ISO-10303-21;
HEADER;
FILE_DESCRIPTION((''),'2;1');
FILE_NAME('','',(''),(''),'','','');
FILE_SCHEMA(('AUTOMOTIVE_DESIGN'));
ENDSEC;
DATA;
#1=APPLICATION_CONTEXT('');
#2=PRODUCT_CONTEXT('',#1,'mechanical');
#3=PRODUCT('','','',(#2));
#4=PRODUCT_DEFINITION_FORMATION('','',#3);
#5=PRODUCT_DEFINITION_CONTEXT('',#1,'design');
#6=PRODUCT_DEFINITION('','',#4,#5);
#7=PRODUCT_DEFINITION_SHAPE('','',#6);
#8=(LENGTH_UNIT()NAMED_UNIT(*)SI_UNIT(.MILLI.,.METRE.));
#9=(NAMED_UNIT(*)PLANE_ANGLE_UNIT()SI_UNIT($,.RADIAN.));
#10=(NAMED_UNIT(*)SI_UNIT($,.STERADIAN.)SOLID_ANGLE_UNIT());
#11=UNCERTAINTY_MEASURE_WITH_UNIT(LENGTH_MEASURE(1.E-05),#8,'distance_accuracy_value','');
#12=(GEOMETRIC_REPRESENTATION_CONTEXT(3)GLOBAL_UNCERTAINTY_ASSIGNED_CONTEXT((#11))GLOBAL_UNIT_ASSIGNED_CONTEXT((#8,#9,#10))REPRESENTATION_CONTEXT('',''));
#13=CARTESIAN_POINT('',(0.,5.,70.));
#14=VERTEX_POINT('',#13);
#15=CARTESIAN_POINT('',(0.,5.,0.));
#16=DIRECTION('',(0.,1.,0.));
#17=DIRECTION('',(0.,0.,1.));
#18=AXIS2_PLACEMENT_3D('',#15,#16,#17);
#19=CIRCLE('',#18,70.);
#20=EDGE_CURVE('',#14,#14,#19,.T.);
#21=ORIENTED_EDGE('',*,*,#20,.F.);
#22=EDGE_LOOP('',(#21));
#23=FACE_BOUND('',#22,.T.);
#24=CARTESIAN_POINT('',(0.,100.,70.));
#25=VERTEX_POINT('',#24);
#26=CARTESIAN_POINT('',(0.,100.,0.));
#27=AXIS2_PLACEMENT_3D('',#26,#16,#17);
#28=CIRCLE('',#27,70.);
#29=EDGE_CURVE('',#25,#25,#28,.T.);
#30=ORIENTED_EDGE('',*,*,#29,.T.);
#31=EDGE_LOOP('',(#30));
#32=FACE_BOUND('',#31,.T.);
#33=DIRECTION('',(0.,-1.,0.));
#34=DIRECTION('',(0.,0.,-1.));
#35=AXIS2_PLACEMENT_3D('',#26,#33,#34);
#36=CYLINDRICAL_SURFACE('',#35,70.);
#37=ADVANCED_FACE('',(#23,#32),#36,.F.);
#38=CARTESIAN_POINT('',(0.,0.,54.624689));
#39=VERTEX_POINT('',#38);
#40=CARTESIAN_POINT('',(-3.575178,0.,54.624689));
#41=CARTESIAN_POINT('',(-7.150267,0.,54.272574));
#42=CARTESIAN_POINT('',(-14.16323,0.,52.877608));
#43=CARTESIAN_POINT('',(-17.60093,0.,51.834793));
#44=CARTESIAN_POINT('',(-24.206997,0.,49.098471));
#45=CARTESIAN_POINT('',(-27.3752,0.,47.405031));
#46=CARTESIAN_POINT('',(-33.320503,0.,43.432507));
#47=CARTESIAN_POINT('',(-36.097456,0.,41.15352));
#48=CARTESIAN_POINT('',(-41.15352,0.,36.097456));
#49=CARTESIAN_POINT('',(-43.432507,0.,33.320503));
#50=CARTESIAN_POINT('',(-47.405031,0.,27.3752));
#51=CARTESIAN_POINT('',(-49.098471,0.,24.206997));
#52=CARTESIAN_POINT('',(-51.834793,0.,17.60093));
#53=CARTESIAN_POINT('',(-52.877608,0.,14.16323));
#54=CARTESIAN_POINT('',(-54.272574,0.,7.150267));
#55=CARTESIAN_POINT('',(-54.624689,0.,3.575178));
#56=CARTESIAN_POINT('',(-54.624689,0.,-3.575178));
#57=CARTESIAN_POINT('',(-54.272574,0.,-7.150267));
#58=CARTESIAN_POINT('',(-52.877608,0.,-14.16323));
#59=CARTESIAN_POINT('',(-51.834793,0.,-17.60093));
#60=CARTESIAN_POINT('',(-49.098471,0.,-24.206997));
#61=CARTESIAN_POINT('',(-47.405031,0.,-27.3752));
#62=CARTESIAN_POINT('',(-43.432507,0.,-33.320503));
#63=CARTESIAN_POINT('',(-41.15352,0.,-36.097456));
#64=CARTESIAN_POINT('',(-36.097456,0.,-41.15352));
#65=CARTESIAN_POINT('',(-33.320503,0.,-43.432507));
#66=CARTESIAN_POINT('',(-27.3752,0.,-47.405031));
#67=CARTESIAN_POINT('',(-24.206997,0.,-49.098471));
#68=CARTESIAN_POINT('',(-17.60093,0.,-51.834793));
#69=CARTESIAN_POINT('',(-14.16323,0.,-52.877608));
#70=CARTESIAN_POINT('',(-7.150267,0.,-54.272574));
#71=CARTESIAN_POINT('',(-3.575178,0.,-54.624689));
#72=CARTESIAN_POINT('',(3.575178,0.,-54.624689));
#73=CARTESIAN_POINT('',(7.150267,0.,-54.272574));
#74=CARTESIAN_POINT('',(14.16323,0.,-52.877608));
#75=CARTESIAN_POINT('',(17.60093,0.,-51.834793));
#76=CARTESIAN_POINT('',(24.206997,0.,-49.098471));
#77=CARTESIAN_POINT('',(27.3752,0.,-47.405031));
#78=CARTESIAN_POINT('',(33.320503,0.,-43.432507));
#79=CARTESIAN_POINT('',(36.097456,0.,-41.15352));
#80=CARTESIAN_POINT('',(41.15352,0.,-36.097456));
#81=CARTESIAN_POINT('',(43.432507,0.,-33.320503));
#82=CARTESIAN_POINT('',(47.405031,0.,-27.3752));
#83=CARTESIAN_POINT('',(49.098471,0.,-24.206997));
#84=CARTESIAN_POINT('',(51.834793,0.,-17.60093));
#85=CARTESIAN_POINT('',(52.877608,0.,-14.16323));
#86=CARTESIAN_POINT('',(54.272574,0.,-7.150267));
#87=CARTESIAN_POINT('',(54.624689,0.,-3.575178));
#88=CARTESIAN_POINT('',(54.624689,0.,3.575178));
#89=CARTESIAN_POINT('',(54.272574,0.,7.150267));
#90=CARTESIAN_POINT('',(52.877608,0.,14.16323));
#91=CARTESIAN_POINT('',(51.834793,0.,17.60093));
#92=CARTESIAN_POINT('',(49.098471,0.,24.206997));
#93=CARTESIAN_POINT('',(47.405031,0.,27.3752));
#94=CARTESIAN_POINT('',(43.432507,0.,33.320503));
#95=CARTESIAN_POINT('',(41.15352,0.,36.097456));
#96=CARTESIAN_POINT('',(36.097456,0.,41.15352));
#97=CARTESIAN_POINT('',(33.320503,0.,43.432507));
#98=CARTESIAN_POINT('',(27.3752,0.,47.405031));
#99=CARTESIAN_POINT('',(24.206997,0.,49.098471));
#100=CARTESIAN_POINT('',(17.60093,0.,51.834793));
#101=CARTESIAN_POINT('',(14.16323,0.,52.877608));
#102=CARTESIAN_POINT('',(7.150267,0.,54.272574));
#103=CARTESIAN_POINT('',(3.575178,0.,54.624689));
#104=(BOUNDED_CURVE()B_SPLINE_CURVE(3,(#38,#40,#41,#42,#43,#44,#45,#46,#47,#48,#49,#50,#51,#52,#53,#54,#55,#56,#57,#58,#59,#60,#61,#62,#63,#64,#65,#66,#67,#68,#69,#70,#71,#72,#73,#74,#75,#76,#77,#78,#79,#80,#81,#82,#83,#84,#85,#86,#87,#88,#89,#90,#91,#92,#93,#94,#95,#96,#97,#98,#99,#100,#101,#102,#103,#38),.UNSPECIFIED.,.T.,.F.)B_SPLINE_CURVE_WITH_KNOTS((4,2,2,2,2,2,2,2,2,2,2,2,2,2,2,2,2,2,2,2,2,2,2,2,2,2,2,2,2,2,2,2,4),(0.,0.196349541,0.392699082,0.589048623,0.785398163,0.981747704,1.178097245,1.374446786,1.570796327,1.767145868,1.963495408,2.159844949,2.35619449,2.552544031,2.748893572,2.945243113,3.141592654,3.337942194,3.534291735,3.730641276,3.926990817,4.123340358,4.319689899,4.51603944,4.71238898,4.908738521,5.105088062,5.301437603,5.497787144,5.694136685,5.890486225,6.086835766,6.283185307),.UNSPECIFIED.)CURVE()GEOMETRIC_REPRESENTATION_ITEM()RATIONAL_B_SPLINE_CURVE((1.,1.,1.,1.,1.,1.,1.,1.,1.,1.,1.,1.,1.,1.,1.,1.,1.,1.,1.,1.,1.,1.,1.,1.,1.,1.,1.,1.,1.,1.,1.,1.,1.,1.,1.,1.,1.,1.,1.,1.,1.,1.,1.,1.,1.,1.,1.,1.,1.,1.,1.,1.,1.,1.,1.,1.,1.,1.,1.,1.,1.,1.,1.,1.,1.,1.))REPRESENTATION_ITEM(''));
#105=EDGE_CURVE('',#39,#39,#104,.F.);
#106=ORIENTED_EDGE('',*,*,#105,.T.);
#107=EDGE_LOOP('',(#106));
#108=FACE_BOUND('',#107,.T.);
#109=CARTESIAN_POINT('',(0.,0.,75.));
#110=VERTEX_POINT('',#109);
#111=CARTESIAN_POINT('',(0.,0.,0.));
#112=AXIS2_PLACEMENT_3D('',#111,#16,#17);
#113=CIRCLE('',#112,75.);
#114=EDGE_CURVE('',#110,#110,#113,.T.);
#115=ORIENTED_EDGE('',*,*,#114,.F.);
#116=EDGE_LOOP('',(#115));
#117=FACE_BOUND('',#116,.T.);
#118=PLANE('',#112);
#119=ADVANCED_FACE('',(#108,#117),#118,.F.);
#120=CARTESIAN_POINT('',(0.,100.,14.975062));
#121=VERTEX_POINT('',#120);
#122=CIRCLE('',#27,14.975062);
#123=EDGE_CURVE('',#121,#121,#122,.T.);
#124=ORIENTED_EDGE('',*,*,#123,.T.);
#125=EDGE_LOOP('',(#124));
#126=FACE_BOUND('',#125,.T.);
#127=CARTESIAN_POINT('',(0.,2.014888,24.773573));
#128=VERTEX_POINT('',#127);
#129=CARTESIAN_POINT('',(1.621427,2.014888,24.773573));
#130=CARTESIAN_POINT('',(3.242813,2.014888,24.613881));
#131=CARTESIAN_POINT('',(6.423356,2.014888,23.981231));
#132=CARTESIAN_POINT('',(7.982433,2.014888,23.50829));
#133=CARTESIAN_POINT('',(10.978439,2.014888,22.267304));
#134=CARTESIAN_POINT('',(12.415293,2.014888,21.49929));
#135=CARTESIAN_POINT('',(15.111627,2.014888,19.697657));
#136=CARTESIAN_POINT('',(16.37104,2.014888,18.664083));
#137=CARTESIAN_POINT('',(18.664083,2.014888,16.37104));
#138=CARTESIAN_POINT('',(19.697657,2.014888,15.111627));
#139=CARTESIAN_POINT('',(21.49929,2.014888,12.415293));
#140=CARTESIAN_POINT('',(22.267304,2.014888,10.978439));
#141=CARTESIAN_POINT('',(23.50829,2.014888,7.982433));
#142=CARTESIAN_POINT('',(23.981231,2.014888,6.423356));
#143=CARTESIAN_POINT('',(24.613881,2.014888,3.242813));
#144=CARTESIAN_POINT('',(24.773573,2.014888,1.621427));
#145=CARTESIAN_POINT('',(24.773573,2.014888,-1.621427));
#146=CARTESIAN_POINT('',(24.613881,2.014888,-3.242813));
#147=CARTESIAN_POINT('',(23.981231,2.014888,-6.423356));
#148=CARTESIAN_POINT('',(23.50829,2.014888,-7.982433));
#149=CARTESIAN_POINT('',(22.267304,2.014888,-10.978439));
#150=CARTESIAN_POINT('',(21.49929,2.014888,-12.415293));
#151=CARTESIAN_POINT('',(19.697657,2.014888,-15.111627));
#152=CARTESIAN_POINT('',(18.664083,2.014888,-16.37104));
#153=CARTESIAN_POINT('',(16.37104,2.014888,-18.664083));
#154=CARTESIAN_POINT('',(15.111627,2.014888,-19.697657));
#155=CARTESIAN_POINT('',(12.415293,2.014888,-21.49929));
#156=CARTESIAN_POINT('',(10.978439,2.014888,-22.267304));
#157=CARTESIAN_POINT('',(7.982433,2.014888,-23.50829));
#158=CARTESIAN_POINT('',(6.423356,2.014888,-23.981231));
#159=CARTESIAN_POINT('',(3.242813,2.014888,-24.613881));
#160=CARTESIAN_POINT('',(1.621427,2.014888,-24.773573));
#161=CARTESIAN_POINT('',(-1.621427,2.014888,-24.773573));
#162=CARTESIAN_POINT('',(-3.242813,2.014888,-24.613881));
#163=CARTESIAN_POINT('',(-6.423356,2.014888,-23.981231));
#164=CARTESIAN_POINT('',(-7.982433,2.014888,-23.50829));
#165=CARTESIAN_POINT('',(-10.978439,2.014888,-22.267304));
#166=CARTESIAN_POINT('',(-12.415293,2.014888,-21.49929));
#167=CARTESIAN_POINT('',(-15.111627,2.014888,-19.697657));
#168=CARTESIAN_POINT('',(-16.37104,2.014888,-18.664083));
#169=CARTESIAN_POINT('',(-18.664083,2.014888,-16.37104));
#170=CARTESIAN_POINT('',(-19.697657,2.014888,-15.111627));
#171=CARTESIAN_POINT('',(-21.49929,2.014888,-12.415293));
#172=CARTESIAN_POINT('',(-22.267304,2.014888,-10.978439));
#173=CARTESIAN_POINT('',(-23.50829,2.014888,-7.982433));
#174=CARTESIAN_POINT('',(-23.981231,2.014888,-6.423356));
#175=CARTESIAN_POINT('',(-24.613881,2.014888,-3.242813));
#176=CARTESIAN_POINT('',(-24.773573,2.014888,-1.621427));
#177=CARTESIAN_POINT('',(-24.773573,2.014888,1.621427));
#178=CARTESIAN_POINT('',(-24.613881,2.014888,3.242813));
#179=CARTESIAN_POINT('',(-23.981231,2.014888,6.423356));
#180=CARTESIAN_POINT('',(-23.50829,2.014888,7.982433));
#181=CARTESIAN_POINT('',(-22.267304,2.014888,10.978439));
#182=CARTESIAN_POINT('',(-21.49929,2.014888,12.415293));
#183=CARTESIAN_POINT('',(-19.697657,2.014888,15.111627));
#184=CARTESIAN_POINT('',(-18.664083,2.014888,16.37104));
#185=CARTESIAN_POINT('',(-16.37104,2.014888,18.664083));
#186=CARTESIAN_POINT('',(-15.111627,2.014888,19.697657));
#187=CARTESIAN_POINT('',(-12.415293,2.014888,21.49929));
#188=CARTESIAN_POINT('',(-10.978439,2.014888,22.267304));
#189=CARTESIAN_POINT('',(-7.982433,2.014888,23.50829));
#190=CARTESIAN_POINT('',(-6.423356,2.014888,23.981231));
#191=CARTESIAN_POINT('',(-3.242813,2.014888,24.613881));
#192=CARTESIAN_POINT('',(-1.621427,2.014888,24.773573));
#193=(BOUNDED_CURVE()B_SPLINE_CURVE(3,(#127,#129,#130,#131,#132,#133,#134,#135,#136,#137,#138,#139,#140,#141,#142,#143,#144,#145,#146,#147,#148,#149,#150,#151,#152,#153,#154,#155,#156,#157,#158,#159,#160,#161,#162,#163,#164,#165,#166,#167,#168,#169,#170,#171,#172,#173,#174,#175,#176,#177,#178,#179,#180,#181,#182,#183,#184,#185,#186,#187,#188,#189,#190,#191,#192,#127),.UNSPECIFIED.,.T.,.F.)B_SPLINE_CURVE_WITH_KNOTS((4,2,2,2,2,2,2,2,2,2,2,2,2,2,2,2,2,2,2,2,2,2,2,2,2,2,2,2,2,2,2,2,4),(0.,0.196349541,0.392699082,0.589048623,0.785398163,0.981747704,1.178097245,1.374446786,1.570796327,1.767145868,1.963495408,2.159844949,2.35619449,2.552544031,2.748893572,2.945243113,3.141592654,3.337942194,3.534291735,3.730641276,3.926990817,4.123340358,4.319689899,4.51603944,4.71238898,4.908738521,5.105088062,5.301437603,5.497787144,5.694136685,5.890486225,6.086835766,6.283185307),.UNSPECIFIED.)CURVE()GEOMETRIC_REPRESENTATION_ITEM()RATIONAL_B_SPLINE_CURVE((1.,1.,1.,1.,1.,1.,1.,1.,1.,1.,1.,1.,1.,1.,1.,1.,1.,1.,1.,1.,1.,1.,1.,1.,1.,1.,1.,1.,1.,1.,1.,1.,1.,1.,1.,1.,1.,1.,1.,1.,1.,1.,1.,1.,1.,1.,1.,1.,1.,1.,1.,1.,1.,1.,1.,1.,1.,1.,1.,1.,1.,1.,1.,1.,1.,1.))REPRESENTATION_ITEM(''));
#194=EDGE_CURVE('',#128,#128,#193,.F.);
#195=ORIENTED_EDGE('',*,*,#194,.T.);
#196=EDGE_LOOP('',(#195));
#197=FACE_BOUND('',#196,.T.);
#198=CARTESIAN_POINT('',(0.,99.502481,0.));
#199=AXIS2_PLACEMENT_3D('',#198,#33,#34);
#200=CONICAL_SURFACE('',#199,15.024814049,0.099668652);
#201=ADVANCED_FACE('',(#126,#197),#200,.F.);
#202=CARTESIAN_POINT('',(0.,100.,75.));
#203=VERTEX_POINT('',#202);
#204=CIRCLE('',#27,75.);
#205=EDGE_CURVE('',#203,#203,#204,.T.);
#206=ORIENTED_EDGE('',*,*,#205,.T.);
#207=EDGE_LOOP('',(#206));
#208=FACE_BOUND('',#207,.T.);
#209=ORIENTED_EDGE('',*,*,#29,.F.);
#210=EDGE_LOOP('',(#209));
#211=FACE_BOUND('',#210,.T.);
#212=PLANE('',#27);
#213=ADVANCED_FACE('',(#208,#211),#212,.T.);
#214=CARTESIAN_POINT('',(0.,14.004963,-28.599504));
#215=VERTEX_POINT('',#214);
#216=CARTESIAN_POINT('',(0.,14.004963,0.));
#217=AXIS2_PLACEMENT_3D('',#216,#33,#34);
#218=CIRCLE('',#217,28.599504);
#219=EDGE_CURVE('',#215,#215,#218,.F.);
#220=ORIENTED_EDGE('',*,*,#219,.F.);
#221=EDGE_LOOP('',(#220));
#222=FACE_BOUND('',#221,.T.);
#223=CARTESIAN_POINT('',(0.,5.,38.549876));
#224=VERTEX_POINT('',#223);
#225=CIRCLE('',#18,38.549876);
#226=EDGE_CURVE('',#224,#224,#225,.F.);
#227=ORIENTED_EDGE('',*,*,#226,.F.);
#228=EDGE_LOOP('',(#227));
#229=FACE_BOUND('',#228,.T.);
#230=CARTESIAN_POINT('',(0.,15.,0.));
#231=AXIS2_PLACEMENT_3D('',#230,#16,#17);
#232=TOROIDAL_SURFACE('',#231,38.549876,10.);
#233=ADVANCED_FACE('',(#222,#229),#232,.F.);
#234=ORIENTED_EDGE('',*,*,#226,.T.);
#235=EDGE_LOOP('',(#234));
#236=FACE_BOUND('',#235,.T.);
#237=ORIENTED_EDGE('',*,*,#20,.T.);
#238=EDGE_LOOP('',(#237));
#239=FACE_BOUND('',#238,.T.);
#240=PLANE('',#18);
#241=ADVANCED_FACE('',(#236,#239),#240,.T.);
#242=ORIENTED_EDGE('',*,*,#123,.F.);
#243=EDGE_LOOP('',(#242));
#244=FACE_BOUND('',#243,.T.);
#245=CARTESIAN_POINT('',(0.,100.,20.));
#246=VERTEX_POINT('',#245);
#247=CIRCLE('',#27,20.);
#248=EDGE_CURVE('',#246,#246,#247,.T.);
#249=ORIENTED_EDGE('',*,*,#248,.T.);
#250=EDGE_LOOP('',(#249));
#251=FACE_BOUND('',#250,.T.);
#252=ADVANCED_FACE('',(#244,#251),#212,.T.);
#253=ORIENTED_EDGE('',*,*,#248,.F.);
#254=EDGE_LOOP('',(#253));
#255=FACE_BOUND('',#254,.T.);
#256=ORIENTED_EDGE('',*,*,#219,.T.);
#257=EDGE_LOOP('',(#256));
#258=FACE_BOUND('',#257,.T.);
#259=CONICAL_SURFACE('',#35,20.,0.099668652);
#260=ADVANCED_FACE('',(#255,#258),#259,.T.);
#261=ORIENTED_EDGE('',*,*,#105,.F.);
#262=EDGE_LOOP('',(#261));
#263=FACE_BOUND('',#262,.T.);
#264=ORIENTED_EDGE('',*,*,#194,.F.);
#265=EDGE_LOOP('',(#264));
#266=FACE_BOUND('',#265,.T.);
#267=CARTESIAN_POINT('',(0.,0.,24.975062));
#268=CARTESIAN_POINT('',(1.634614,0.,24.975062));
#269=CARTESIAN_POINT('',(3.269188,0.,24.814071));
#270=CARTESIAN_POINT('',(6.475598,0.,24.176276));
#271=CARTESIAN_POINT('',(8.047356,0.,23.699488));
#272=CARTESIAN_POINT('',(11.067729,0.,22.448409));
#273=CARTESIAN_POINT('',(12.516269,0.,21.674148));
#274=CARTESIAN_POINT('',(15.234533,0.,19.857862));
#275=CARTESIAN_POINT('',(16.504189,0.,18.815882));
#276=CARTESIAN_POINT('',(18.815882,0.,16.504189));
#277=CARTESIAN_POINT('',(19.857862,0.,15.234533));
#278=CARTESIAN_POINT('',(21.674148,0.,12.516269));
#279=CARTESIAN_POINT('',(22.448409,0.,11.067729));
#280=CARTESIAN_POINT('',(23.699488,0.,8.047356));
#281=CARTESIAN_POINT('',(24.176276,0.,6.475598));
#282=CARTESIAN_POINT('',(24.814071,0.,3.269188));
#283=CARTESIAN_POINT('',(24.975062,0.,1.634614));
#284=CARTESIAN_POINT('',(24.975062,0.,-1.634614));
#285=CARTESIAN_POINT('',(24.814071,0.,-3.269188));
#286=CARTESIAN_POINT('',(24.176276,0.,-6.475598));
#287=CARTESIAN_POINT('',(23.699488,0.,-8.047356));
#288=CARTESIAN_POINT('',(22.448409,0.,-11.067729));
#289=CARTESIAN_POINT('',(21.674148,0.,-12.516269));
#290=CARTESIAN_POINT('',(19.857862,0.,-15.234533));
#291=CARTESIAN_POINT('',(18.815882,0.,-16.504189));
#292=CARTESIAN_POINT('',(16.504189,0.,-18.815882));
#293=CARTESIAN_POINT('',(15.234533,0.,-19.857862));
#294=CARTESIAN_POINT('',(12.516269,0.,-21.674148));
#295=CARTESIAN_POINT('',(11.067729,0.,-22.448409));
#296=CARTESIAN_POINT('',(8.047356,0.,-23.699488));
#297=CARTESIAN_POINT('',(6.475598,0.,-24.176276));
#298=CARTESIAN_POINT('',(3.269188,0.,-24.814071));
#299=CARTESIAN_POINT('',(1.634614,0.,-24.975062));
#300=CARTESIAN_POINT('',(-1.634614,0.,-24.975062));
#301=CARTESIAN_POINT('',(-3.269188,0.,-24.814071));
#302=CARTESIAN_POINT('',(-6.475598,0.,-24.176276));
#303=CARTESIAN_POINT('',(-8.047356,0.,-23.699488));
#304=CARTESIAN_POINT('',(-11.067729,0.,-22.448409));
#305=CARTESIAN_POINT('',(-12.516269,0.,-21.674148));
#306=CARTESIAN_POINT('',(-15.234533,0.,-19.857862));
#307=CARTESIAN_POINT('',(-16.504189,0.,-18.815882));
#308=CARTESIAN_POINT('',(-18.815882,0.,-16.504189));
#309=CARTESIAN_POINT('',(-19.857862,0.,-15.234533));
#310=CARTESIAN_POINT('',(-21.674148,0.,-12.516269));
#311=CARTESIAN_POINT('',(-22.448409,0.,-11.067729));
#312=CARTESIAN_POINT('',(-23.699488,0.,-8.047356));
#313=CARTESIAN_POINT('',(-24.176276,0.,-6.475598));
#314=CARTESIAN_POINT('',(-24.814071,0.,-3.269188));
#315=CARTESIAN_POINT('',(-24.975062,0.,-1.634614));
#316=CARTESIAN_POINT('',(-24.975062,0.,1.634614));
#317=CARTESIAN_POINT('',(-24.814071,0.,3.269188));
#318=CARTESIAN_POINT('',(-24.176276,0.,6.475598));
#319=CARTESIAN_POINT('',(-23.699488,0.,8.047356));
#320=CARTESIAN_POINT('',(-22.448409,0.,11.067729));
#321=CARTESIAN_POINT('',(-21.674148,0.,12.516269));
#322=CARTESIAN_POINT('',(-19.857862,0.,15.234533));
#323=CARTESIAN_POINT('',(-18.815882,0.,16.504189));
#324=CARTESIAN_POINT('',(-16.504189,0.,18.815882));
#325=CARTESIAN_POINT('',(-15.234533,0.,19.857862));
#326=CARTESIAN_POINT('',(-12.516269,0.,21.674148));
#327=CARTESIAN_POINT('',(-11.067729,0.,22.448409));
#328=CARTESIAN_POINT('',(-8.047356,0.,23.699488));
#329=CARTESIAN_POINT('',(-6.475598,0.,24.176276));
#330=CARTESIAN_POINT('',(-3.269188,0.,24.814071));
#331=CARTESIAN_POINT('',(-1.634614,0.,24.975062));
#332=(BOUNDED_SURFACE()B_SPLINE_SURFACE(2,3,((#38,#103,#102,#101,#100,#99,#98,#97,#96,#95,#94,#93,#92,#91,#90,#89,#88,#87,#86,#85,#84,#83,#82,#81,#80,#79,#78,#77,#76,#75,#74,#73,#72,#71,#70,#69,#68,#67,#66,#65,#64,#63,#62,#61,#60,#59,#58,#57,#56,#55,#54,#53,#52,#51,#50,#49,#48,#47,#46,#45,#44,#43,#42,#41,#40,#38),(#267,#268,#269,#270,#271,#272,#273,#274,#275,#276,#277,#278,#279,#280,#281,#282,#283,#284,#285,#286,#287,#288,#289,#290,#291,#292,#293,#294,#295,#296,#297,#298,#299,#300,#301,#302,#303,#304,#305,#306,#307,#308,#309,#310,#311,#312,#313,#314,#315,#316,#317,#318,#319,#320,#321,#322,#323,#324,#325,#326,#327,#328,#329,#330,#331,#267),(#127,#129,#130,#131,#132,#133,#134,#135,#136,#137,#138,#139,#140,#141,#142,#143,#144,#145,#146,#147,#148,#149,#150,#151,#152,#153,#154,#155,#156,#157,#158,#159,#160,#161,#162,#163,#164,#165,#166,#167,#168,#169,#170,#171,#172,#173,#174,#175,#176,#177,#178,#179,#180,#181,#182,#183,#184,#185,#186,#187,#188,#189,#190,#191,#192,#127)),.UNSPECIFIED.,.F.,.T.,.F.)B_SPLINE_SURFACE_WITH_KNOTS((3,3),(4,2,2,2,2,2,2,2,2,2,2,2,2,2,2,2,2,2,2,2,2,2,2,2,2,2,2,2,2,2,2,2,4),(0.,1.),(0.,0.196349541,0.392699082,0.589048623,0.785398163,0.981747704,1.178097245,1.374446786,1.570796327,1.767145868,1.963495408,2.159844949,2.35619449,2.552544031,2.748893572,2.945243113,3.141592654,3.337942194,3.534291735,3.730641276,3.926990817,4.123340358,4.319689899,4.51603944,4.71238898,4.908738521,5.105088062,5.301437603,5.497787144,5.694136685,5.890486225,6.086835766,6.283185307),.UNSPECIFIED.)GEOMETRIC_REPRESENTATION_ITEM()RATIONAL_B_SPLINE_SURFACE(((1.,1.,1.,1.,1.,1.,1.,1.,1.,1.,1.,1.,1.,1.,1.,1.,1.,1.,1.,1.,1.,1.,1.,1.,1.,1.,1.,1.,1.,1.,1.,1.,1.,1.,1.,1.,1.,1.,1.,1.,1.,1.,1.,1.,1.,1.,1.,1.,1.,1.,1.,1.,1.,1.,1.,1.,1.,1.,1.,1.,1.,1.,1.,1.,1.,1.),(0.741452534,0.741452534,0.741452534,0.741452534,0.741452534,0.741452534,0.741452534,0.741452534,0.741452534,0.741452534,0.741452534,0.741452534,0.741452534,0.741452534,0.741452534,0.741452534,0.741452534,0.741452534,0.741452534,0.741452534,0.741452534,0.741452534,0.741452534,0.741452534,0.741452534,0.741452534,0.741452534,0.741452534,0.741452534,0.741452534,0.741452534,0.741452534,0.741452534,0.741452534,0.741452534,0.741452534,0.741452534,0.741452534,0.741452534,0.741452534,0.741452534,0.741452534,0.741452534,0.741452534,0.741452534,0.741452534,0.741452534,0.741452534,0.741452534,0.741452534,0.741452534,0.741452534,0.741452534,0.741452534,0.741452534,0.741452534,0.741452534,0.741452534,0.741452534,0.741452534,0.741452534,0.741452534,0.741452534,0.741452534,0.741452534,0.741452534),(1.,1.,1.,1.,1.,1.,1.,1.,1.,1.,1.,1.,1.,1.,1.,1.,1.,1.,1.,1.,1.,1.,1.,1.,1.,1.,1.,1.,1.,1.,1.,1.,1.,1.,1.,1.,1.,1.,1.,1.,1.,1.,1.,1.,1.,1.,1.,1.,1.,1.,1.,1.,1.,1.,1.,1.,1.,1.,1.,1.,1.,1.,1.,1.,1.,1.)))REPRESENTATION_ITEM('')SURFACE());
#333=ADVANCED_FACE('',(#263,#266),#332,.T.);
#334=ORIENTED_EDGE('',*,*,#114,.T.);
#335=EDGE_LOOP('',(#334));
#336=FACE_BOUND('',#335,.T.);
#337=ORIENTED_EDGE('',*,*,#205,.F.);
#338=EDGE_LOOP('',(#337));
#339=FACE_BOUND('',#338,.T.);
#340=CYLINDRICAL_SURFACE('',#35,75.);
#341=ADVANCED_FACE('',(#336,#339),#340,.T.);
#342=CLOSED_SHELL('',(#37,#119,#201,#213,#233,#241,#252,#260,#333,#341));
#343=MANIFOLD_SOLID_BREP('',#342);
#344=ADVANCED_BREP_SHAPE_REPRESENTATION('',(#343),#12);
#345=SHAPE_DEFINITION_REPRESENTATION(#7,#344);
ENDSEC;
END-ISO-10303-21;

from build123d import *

# Parameters (mm, degrees)
SKETCH1_R           = 75
BOSS_EXTRUDE1_DEPTH = 100
SHELL1_T            = -5
SKETCH3_R           = 20
SKETCH2_R           = 30
FILLET2_R           = 10


# Read off the part's stored shape, not the designer's step: Shell2
with BuildPart() as part:
    # Sketch1 → Boss-Extrude1 (new body)
    with BuildSketch(Plane(origin=(0, 0, 0), x_dir=(1, 0, 0), z_dir=(0, 1, 0))):
        with Locations(Location((0, 0, 0), (0, 0, 270))):
            Circle(SKETCH1_R)
    extrude(amount=BOSS_EXTRUDE1_DEPTH)

    # Shell1
    shell1_openings = [part.faces().sort_by_distance(p)[0] for p in [
        (0, 100, 0),
    ]]
    offset(amount=SHELL1_T, openings=shell1_openings, kind=Kind.INTERSECTION)

    # Sketch3 → Loft1 section 0
    with BuildSketch(Plane(origin=(0, 100, 0), x_dir=(1, 0, 0), z_dir=(0, 1, 0))):
        Circle(SKETCH3_R)
    # Sketch2 → Loft1 section 1
    with BuildSketch(Plane.XZ):
        Circle(SKETCH2_R)
    loft()

    # Shell2 outline → Shell2 (revolve, cut)
    with BuildSketch(Plane.XY):
        Polygon((0, 0), (24.975062189, 0), (14.975062189, 100), (0, 100), align=None)
    revolve(axis=Axis((0, 0, 0), (0, 1, 0)), mode=Mode.SUBTRACT)

    # Fillet1
    # an asymmetric fillet: 30, 5 mm, written as the material it takes off along each edge
    with BuildSketch(Plane(origin=(0, 0, 0), x_dir=(1, 0, 0), z_dir=(0, 0, 1))) as fillet1_piece_1:
        with BuildLine():
            Bezier((54.624689052, 0), (24.975062189, 0), (24.773573346, 2.014888429), weights=[1, 0.741452534, 1])
            Line((24.773573346, 2.014888429), (24.975062189, 0))
            Line((24.975062189, 0), (54.624689052, 0))
        make_face()
    revolve(axis=Axis((0, 0, 0), (0, 1, 0)), mode=Mode.SUBTRACT)

    # Fillet2
    fillet2_edges = [part.edges().sort_by_distance(p)[0] for p in [
        (-29.5, 5, 0),
    ]]
    fillet(fillet2_edges, radius=FILLET2_R)


solid = part.part
